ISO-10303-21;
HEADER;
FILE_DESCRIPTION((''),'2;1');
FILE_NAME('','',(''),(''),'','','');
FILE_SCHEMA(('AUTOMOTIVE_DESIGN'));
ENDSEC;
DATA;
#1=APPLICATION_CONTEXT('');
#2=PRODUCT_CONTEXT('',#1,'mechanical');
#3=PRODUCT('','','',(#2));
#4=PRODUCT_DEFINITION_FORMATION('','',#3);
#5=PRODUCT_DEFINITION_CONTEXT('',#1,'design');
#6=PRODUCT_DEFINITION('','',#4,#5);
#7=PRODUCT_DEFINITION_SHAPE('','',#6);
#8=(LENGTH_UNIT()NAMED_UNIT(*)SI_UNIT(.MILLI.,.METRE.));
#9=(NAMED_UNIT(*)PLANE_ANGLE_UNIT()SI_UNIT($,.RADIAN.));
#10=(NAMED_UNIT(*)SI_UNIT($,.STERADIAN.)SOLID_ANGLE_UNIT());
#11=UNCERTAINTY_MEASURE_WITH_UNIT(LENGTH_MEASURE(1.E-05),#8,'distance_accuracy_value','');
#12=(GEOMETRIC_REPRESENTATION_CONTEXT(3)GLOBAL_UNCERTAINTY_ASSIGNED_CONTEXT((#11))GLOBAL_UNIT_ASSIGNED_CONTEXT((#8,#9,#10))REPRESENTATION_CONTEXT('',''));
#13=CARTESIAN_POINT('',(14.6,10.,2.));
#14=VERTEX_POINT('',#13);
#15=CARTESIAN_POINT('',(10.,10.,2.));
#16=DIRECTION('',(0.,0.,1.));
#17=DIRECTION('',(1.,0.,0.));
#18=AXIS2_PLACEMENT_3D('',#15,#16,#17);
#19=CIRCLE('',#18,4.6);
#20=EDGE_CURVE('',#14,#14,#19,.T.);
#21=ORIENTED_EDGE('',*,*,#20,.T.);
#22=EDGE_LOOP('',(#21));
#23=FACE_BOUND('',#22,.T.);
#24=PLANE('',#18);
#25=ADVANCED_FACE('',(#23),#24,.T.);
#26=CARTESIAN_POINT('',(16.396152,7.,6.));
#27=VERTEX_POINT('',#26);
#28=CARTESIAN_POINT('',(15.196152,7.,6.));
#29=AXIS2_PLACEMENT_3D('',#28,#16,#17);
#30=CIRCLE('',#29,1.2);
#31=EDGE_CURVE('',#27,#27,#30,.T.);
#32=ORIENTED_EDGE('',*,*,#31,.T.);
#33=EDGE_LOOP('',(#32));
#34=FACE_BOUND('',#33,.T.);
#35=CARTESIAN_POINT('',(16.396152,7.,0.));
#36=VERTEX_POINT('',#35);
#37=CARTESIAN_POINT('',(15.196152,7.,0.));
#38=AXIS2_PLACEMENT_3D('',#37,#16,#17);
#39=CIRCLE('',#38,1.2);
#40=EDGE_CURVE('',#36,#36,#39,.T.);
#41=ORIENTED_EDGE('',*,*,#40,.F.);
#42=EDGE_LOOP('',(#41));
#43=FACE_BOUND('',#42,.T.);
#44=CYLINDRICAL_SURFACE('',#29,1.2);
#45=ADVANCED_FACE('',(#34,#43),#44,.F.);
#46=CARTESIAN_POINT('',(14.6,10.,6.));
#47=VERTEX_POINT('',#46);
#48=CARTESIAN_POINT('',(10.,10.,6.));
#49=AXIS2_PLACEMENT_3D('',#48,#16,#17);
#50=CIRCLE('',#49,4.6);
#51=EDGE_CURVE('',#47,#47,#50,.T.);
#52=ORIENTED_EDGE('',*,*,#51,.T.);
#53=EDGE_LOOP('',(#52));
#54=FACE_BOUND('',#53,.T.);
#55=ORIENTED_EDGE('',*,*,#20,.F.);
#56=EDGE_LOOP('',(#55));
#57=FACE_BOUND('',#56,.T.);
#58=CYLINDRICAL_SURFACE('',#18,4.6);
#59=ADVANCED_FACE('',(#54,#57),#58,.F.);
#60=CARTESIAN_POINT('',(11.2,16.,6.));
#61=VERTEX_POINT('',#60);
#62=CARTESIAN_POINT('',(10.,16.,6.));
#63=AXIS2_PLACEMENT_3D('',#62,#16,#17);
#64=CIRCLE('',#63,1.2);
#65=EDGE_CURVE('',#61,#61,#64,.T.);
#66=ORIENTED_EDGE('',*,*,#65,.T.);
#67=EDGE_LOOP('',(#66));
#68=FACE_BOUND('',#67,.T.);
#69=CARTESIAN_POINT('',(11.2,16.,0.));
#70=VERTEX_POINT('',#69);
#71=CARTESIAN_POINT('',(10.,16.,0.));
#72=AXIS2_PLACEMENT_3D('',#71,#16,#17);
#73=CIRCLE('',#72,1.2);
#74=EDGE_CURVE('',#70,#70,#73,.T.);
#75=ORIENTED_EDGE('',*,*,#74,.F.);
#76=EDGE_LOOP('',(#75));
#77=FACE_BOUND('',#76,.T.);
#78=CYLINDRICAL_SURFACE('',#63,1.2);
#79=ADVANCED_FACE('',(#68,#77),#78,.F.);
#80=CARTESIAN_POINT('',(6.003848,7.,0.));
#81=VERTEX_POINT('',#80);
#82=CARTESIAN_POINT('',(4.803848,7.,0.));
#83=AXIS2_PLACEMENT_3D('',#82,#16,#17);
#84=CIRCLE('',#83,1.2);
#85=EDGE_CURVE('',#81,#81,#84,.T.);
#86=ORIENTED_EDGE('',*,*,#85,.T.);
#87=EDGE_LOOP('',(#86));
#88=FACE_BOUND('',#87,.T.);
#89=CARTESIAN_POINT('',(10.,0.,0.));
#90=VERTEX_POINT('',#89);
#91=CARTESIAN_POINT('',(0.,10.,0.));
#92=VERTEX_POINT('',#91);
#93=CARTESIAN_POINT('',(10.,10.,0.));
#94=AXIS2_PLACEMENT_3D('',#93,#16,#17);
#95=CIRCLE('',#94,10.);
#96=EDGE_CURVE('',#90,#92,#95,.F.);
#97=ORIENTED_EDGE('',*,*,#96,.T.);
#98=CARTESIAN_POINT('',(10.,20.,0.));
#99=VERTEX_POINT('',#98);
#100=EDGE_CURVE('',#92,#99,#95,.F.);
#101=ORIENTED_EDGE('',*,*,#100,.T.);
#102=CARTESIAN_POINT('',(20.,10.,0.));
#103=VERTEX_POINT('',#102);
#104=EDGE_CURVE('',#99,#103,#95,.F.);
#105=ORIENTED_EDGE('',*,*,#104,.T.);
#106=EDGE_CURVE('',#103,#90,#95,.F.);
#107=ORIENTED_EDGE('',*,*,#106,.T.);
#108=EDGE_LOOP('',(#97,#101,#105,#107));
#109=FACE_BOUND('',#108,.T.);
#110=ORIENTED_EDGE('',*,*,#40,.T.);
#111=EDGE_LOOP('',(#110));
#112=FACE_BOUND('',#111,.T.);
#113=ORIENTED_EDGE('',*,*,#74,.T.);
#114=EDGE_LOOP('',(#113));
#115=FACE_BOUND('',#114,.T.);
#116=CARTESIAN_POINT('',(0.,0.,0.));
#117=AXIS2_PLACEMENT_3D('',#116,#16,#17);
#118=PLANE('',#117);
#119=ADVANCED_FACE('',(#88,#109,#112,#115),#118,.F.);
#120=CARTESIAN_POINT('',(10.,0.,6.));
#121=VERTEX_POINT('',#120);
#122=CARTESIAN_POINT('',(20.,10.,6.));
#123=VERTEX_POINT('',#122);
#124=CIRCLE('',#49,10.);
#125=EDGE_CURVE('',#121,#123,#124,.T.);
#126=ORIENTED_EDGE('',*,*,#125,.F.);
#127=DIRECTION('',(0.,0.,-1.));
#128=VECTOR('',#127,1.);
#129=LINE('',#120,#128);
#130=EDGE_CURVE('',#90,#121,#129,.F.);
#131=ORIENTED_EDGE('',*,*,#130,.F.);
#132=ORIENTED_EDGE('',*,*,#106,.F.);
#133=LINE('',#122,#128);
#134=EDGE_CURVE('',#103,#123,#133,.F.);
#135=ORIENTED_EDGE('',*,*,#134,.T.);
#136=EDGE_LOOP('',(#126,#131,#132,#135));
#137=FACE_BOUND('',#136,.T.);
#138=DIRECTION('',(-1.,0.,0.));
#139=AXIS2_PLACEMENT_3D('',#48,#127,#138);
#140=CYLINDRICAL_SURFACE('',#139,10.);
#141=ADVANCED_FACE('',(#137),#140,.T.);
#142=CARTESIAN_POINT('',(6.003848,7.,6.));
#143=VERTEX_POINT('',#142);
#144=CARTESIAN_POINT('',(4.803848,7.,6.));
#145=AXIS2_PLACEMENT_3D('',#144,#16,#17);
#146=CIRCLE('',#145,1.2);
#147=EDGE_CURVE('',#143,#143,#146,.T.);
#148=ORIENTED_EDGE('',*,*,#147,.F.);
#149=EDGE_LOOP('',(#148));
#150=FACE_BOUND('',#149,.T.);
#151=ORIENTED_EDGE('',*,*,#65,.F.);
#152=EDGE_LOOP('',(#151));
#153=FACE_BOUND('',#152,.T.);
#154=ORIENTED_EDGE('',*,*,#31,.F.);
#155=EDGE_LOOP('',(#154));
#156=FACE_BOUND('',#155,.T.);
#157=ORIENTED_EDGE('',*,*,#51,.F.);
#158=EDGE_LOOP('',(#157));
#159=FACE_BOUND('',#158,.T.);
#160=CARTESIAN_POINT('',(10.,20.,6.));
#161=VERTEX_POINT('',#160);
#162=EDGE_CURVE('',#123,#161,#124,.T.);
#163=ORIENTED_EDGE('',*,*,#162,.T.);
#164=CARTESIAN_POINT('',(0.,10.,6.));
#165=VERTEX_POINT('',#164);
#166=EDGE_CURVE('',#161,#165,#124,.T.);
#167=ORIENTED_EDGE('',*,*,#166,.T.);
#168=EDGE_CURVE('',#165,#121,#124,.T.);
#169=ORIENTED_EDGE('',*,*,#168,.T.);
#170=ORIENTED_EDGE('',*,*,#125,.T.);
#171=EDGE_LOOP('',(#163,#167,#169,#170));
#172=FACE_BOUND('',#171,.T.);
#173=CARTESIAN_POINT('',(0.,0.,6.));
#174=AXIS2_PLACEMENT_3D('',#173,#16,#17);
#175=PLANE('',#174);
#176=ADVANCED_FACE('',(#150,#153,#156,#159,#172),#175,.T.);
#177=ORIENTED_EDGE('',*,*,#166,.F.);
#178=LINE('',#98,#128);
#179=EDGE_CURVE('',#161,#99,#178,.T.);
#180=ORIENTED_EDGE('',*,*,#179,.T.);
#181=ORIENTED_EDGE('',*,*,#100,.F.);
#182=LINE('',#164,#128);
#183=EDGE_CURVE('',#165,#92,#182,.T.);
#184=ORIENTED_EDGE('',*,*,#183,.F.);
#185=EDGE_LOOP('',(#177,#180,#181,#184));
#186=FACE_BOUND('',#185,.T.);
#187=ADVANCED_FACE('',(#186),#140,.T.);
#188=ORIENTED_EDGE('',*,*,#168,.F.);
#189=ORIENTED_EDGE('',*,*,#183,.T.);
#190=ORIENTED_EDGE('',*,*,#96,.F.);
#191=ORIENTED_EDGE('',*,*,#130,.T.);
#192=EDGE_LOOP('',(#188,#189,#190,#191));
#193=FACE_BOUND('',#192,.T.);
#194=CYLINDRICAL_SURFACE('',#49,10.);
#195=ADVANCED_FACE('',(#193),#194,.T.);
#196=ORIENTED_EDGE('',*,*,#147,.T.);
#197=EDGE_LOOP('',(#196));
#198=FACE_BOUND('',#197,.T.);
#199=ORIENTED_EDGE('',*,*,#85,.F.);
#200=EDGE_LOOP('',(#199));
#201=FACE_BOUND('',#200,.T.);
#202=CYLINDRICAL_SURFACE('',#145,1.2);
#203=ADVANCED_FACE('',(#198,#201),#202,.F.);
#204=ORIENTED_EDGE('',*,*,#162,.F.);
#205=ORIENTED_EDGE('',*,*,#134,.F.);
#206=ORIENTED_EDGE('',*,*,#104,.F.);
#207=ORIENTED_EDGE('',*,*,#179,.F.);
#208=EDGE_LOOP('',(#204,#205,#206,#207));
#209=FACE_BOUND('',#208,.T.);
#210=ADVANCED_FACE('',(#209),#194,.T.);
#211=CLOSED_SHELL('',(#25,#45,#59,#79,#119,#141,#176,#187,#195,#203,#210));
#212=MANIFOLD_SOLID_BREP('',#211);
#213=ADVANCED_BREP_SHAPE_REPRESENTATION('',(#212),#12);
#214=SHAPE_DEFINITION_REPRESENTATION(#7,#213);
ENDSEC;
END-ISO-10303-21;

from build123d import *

# Parameters (mm, degrees)
SKETCH1_W                = 20
SKETCH1_H                = 20
SKETCH1_R                = 6
BOSS_EXTRUDE1_DEPTH      = 6
M2_CLEARANCE_HOLE1_D     = 2.4
M2_CLEARANCE_HOLE1_DEPTH = 10
M2_CLEARANCE_HOLE1_TIP   = 0.721032743
FILLET1_R                = 10
SKETCH4_R                = 4.6
CUT_EXTRUDE1_DEPTH       = 4


with BuildPart() as part:
    # Sketch1 → Boss-Extrude1 (new body)
    # profile 1 of 2: a face of its own
    with BuildSketch(Plane.XY):
        with Locations((10, 10)):
            Rectangle(SKETCH1_W, SKETCH1_H)
        with Locations((10, 10)):
            Circle(SKETCH1_R, mode=Mode.SUBTRACT)
    # profile 2 of 2: a face of its own
    with BuildSketch(Plane.XY):
        with Locations((10, 10)):
            Circle(SKETCH1_R)
    extrude(amount=BOSS_EXTRUDE1_DEPTH)

    # M2 Clearance Hole1
    with Locations(Plane.XY.offset(6)):
        with Locations((10, 16), (15.196152423, 7), (4.803847577, 7)):
            Hole(M2_CLEARANCE_HOLE1_D / 2, depth=M2_CLEARANCE_HOLE1_DEPTH)
            with Locations((0, 0, -(M2_CLEARANCE_HOLE1_DEPTH + M2_CLEARANCE_HOLE1_TIP / 2))):  # 118° drill point
                Cone(0, M2_CLEARANCE_HOLE1_D / 2, M2_CLEARANCE_HOLE1_TIP, mode=Mode.SUBTRACT)

    # Fillet1
    fillet1_edges = [part.edges().sort_by_distance(p)[0] for p in [
        (0, 0, 3),
        (20, 0, 3),
        (20, 20, 3),
        (0, 20, 3),
    ]]
    fillet(fillet1_edges, radius=FILLET1_R - 0.0001)  # a hair under: the kernel refuses the full size

    # Sketch4 → Cut-Extrude1 (cut)
    with BuildSketch(Plane.XY.offset(6)):
        with Locations((10, 10)):
            Circle(SKETCH4_R)
    extrude(amount=-CUT_EXTRUDE1_DEPTH, mode=Mode.SUBTRACT)


solid = part.part
